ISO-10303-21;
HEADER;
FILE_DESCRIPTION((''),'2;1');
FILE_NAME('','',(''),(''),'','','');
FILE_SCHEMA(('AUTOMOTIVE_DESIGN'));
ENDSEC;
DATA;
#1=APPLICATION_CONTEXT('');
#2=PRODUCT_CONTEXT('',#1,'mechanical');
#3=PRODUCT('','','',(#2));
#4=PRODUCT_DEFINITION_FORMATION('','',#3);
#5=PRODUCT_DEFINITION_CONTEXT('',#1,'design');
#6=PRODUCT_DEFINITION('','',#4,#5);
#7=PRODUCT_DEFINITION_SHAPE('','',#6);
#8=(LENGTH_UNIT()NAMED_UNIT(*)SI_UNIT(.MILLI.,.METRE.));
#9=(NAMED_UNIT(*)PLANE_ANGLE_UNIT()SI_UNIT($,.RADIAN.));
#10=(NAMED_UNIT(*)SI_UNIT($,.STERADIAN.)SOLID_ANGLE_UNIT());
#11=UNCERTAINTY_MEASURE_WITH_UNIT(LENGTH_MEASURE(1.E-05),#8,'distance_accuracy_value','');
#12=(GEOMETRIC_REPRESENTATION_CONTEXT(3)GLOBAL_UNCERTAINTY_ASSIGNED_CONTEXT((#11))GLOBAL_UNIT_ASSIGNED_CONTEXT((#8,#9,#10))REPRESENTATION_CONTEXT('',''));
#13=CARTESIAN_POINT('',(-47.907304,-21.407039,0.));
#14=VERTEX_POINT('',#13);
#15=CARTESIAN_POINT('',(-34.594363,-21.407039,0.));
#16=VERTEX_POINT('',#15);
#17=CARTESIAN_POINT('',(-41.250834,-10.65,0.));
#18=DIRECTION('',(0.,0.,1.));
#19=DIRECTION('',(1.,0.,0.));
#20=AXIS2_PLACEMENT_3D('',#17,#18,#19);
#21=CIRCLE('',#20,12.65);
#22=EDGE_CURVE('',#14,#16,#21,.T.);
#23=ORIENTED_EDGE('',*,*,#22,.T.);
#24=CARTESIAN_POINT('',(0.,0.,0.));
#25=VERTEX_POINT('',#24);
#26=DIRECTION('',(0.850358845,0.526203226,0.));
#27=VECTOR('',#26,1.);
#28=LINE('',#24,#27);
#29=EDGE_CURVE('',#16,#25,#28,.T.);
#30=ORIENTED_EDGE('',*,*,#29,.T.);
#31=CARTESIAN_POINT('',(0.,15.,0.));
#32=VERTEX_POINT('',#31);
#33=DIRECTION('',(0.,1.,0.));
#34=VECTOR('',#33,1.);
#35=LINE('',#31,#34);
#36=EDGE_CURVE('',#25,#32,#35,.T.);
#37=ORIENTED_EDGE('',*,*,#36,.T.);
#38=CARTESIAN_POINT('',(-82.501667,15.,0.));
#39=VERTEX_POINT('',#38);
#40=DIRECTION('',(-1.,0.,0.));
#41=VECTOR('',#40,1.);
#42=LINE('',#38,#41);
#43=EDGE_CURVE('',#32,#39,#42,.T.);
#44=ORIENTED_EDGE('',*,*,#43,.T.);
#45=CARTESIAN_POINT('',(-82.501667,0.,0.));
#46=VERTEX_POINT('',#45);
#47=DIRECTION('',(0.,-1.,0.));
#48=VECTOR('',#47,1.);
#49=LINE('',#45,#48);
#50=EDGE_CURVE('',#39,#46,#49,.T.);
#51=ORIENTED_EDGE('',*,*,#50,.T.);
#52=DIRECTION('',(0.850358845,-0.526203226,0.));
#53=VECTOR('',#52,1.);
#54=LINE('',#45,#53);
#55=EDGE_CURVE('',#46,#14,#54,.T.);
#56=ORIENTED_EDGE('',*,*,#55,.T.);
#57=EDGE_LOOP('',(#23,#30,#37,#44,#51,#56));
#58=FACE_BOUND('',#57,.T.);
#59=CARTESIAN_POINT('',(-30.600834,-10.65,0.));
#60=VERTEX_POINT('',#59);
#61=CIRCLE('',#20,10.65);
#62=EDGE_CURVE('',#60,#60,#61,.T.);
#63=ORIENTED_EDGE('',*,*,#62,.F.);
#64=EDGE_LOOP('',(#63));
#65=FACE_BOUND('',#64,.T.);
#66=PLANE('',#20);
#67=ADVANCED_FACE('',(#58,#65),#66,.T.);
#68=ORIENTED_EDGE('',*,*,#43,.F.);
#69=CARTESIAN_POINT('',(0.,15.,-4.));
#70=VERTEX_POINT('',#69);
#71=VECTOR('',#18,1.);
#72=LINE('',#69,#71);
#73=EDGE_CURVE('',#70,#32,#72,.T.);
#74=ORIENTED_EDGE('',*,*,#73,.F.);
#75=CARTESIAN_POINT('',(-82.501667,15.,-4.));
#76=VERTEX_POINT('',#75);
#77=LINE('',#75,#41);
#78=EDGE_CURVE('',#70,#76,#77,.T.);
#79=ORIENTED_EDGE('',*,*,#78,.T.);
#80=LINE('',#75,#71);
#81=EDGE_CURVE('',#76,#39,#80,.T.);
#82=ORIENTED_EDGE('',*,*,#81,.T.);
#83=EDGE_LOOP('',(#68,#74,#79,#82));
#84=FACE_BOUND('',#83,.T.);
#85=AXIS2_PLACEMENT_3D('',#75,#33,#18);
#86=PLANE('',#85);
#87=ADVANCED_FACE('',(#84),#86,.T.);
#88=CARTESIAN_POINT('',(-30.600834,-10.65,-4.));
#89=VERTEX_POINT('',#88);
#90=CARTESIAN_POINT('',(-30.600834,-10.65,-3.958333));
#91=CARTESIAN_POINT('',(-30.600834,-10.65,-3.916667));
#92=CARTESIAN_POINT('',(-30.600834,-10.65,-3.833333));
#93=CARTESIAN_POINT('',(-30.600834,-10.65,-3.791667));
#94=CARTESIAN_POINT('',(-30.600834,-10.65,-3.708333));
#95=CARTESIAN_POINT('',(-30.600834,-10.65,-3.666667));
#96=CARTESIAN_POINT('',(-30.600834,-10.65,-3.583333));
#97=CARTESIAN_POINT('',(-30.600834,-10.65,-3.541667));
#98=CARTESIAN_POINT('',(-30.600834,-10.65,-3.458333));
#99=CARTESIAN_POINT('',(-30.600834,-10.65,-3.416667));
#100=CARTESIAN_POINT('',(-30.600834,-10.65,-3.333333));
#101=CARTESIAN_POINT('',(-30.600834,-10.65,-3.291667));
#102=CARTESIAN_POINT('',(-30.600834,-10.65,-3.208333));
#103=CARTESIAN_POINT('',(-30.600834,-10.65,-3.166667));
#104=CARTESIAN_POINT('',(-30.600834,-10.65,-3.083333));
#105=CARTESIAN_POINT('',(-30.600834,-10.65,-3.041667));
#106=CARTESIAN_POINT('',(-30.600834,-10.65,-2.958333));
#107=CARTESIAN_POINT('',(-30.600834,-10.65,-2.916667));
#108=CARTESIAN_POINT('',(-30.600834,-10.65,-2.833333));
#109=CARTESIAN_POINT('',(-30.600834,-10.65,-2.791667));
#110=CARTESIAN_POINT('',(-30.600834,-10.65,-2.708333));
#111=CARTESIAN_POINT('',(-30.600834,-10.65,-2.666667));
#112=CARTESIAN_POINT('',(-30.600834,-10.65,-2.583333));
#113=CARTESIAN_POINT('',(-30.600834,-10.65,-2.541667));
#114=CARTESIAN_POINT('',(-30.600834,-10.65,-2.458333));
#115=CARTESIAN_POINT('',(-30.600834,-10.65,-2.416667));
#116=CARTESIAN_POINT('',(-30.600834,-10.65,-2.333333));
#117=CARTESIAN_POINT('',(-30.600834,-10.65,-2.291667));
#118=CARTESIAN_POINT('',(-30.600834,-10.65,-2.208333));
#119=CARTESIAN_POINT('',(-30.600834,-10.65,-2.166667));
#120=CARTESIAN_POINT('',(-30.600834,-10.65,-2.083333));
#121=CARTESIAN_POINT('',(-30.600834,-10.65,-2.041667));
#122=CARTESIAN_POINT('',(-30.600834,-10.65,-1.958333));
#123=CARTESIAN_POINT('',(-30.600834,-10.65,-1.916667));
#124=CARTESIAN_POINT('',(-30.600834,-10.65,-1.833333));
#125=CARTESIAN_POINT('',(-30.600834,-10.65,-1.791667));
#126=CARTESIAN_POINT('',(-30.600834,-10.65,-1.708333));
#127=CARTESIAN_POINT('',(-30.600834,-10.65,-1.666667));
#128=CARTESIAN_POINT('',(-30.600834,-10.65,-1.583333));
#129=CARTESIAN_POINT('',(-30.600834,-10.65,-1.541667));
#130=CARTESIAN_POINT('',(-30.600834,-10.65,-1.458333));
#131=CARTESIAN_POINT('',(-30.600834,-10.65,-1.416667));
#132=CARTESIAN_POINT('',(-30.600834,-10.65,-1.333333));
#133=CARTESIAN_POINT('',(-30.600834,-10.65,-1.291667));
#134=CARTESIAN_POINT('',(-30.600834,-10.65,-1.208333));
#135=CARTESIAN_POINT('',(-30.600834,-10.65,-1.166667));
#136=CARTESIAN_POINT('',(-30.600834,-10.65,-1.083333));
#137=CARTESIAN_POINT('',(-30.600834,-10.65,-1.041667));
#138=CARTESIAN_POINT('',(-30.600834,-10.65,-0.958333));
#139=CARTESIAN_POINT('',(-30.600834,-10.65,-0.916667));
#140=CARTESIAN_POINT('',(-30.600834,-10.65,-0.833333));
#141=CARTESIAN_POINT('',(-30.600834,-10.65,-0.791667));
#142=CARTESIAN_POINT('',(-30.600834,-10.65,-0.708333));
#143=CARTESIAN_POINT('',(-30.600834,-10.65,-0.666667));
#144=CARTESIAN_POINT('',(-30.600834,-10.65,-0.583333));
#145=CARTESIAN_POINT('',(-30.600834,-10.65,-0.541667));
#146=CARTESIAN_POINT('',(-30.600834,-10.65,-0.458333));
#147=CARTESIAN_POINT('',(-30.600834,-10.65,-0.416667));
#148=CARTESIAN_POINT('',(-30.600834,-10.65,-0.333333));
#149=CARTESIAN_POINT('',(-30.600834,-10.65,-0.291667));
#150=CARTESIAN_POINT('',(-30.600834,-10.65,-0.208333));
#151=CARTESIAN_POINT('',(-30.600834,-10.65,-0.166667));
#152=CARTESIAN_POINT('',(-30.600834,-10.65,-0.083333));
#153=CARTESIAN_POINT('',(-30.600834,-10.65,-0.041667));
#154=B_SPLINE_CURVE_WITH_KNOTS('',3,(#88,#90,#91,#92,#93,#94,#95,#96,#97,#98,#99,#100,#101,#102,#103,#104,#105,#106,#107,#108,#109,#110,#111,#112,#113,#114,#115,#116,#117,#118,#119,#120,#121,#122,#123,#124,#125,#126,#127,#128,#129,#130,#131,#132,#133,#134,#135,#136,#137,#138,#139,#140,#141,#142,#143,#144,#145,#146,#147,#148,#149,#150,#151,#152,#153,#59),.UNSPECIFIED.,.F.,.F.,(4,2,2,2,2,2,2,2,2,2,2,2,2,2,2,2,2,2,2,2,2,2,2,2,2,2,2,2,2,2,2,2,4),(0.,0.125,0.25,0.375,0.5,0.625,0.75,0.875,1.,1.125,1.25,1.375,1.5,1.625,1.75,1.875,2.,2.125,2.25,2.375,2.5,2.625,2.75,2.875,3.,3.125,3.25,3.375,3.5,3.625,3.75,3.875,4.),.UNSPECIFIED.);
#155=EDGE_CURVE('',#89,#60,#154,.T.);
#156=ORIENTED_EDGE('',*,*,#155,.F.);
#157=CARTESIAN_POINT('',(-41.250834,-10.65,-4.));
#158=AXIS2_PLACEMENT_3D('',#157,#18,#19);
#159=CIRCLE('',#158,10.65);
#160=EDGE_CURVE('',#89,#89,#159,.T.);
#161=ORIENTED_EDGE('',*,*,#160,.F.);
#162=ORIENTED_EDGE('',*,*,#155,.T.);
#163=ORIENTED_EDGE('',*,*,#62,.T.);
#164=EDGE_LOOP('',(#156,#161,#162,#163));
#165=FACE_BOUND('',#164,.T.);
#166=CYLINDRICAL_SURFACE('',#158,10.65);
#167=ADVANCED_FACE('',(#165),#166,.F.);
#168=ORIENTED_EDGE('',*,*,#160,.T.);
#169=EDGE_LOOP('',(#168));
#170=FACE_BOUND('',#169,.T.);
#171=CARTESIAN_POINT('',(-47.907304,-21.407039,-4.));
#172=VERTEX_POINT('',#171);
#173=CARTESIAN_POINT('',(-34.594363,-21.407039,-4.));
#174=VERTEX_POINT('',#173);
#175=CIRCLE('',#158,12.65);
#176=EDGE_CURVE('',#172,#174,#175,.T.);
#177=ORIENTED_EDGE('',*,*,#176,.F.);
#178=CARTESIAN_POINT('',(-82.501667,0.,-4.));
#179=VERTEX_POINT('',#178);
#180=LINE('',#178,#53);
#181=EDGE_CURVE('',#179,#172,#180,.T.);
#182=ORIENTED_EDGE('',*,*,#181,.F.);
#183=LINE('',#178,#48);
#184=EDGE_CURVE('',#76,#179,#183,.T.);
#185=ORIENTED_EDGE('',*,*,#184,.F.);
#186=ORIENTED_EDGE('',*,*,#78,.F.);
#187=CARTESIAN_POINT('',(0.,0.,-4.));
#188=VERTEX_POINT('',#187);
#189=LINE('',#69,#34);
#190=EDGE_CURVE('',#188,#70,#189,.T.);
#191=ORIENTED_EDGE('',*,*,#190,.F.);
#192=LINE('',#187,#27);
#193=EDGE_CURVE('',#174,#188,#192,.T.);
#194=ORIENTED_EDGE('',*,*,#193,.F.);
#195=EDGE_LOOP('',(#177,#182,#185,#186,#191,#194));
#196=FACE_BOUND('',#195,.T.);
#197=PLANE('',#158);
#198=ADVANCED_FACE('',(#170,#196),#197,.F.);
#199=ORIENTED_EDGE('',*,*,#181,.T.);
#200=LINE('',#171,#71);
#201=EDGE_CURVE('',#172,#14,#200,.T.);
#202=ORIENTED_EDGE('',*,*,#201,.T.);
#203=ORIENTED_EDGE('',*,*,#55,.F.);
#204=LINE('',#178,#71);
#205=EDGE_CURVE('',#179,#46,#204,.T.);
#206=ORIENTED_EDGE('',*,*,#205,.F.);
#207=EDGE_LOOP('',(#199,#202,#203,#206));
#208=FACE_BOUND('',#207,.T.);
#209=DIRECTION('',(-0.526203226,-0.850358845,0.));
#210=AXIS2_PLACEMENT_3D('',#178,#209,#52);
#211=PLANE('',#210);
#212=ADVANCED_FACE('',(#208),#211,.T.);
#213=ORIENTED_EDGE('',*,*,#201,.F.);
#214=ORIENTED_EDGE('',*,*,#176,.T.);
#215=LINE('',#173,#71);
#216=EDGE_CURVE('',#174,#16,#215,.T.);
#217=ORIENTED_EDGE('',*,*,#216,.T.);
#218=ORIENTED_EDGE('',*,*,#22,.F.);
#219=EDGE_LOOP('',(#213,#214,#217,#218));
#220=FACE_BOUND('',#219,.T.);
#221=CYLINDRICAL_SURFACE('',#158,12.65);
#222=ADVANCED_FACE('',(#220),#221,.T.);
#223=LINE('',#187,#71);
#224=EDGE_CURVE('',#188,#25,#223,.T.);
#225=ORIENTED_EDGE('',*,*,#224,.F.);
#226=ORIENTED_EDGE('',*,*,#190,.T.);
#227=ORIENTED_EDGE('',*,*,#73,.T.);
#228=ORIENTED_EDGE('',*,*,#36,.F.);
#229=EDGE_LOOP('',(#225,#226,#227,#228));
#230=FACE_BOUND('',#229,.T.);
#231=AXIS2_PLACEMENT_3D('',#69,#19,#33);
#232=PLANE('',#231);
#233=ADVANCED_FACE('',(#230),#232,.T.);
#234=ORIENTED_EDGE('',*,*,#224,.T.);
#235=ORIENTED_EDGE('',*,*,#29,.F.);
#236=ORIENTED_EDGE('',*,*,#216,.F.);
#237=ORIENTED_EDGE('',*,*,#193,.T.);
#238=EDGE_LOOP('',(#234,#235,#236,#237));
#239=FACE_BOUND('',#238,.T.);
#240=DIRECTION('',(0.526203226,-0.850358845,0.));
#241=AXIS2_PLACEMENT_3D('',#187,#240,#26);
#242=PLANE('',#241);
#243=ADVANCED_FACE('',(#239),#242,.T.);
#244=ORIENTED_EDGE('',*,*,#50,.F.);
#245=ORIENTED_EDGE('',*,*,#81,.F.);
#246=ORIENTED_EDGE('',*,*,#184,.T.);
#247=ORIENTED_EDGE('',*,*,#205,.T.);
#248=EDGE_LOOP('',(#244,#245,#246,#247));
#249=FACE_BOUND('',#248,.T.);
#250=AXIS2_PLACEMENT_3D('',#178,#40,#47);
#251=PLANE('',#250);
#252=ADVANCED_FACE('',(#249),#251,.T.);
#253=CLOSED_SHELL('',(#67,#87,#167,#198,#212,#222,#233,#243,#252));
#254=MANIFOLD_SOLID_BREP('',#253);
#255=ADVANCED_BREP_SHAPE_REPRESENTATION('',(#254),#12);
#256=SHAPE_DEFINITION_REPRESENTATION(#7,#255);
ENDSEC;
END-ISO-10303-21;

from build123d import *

# Parameters (mm, degrees)
SKETCH_1_R             = 10.65
SM_BASE_FLANGE_1_DEPTH = 4


# Sheet-metal steps are written as plain solids
with BuildPart() as part:
    # Sketch 1 → Базовая кромка1 (new body)
    with BuildSketch(Plane.XY):
        with BuildLine():
            Line((0, 0), (-34.594362709, -21.407039383))
            ThreePointArc((-34.594362709, -21.407039383), (-41.250833524, -23.3), (-47.907304338, -21.407039383))
            Line((-47.907304338, -21.407039383), (-82.501667048, 0))
            Line((-82.501667048, 0), (-82.501667048, 15))
            Line((-82.501667048, 15), (0, 15))
            Line((0, 15), (0, 0))
        make_face()
        with Locations((-41.250833524, -10.65)):
            Circle(SKETCH_1_R, mode=Mode.SUBTRACT)
    extrude(amount=-SM_BASE_FLANGE_1_DEPTH)


solid = part.part
